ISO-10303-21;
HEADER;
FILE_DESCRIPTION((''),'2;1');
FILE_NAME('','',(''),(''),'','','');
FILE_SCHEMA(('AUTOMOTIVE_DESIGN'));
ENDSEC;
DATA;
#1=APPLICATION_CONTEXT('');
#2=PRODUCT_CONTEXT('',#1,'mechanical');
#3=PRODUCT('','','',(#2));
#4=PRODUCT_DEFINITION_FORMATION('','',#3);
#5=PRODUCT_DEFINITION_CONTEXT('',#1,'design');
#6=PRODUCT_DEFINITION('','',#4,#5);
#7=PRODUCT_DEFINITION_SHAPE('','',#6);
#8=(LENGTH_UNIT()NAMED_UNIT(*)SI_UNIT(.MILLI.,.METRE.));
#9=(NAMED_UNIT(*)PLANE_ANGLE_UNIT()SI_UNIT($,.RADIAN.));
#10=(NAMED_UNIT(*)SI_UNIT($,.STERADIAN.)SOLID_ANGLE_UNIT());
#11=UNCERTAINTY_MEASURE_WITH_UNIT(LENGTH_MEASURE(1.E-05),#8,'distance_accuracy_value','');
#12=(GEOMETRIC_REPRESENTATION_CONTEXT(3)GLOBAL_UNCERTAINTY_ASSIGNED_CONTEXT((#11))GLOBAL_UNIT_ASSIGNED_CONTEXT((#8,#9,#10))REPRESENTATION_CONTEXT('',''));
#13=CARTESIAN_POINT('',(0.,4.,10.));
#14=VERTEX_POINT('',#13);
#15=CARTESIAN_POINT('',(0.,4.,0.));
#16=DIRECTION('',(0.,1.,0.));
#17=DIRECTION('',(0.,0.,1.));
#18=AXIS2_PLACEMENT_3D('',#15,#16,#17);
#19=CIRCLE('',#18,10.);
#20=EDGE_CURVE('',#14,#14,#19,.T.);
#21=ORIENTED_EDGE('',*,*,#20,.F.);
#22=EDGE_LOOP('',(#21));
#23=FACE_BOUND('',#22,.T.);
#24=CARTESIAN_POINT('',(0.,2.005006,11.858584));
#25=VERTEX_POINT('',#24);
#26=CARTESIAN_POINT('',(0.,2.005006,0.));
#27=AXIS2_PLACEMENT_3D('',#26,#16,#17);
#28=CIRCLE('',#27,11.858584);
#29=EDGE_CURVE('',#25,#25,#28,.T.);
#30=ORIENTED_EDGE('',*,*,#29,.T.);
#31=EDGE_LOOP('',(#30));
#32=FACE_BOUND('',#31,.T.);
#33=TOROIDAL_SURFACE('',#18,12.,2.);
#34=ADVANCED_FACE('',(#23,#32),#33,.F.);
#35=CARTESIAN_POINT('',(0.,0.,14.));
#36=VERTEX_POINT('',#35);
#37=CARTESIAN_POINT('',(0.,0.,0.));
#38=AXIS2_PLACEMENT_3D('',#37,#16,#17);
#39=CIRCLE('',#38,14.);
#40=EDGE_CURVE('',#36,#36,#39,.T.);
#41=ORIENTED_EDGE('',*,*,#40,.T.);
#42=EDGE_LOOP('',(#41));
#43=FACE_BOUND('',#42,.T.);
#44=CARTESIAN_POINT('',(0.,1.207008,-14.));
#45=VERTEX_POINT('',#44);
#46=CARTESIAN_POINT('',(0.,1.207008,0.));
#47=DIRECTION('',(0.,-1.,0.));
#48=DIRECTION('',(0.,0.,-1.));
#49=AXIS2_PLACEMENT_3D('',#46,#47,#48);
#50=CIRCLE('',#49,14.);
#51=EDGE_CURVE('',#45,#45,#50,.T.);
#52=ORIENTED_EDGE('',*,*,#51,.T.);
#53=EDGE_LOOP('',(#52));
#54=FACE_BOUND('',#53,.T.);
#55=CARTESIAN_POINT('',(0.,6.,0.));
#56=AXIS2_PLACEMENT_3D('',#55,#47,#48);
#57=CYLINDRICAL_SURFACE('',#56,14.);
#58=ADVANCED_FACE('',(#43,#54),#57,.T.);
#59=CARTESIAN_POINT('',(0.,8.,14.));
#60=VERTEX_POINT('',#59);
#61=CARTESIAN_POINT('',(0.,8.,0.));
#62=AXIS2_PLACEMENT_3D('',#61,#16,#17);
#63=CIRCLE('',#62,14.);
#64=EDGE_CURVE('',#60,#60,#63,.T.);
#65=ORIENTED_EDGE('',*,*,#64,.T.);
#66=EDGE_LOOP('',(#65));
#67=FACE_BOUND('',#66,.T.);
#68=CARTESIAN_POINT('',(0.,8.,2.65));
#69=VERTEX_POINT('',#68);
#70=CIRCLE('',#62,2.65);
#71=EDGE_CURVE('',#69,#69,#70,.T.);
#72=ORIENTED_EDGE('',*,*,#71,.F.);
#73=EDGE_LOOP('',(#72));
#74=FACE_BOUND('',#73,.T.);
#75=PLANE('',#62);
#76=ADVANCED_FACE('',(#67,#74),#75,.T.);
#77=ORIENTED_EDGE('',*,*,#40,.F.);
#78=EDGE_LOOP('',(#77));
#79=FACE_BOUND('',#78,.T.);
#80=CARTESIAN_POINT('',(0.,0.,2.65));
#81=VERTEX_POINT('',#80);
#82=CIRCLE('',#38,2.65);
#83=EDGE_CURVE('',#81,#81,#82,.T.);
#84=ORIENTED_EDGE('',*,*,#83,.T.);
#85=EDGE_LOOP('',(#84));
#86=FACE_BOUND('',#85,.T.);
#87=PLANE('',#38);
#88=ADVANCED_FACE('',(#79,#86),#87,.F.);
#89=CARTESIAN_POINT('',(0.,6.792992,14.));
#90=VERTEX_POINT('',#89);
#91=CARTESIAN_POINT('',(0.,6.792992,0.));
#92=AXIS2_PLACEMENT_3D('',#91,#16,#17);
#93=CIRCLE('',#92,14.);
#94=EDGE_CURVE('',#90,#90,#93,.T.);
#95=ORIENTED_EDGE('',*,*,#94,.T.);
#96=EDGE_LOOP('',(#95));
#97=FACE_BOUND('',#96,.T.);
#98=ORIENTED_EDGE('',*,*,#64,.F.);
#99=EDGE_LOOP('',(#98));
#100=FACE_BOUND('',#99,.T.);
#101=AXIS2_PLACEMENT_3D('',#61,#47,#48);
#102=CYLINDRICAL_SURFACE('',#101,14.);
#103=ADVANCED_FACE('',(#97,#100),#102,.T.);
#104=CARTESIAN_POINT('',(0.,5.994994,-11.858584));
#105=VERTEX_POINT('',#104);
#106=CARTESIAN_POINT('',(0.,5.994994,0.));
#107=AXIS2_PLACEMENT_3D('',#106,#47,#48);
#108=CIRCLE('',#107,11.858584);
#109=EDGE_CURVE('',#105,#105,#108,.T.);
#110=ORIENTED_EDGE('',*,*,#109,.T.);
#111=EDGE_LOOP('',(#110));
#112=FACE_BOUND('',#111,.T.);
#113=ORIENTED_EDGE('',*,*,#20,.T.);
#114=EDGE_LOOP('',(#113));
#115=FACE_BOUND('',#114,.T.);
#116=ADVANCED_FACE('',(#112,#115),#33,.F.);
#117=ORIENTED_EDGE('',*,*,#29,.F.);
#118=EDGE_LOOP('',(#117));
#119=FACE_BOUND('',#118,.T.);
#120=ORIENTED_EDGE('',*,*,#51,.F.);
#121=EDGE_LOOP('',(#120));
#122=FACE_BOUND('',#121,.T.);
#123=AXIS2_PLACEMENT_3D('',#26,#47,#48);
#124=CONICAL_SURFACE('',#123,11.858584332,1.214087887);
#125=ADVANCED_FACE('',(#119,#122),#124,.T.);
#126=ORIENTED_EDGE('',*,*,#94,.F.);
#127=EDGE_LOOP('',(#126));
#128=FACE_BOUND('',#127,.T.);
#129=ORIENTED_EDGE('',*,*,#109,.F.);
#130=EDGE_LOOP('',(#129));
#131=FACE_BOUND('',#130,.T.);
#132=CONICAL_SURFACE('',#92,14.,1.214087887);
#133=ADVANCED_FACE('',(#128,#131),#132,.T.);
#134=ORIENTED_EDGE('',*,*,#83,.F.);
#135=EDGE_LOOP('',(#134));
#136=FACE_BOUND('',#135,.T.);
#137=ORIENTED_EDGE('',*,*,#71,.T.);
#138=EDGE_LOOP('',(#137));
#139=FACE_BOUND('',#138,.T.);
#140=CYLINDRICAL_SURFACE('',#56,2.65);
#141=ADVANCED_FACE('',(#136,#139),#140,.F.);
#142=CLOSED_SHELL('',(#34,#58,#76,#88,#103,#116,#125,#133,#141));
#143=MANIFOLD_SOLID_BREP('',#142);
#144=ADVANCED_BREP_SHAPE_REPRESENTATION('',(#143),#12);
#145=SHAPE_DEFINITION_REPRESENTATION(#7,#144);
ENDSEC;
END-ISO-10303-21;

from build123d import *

# Parameters (mm, degrees)
SKETCH1_R           = 14
SKETCH1_R_2         = 2.65
BOSS_EXTRUDE1_DEPTH = 6
CUT_EXTRUDE1_START  = -4
SKETCH2_R           = 14
SKETCH2_R_2         = 10
CUT_EXTRUDE1_DEPTH  = 4
SKETCH3_R           = 14
SKETCH3_R_2         = 2.65
BOSS_EXTRUDE2_DEPTH = 2
FILLET1_R           = 2


with BuildPart() as part:
    # Sketch1 → Boss-Extrude1 (new body)
    with BuildSketch(Plane(origin=(0, 0, 0), x_dir=(1, 0, 0), z_dir=(0, 1, 0))):
        with Locations(Location((0, 0, 0), (0, 0, 270))):
            Circle(SKETCH1_R)
        with Locations(Location((0, 0, 0), (0, 0, 270))):
            Circle(SKETCH1_R_2, mode=Mode.SUBTRACT)
    extrude(amount=BOSS_EXTRUDE1_DEPTH)

    # Sketch2 → Cut-Extrude1 (cut)
    with BuildSketch(Plane(origin=(0, 6, 0), x_dir=(1, 0, 0), z_dir=(0, 1, 0)).offset(CUT_EXTRUDE1_START)):
        with Locations(Location((0, 0, 0), (0, 0, 270))):
            Circle(SKETCH2_R)
        with Locations(Location((0, 0, 0), (0, 0, 270))):
            Circle(SKETCH2_R_2, mode=Mode.SUBTRACT)
    extrude(amount=CUT_EXTRUDE1_DEPTH, mode=Mode.SUBTRACT)

    # Sketch3 → Boss-Extrude2 (add)
    with BuildSketch(Plane(origin=(0, 6, 0), x_dir=(1, 0, 0), z_dir=(0, 1, 0))):
        with Locations(Location((0, 0, 0), (0, 0, 270))):
            Circle(SKETCH3_R)
        with Locations(Location((0, 0, 0), (0, 0, 270))):
            Circle(SKETCH3_R_2, mode=Mode.SUBTRACT)
    extrude(amount=BOSS_EXTRUDE2_DEPTH)

    # Fillet1
    fillet1_edges = [part.edges().sort_by_distance(p)[0] for p in [
        (0, 2, -10),
        (0, 6, -10),
    ]]
    fillet(fillet1_edges, radius=FILLET1_R - 0.0001)  # a hair under: the kernel refuses the full size

    # Chamfer1: read off the stored shape, not the designer's step
    # Chamfer1 outline → Chamfer1 (revolve, cut)
    with BuildSketch(Plane.XY):
        Polygon((11.858584332, 5.994994138), (12, 5.994994138), (12, 6), (14, 6), (14, 6.792991793), align=None)
        Polygon((12, 2.005005862), (11.858584332, 2.005005862), (14, 1.207008207), (14, 2), (12, 2), align=None)
    revolve(axis=Axis((0, 0, 0), (0, 1, 0)), mode=Mode.SUBTRACT)


solid = part.part
